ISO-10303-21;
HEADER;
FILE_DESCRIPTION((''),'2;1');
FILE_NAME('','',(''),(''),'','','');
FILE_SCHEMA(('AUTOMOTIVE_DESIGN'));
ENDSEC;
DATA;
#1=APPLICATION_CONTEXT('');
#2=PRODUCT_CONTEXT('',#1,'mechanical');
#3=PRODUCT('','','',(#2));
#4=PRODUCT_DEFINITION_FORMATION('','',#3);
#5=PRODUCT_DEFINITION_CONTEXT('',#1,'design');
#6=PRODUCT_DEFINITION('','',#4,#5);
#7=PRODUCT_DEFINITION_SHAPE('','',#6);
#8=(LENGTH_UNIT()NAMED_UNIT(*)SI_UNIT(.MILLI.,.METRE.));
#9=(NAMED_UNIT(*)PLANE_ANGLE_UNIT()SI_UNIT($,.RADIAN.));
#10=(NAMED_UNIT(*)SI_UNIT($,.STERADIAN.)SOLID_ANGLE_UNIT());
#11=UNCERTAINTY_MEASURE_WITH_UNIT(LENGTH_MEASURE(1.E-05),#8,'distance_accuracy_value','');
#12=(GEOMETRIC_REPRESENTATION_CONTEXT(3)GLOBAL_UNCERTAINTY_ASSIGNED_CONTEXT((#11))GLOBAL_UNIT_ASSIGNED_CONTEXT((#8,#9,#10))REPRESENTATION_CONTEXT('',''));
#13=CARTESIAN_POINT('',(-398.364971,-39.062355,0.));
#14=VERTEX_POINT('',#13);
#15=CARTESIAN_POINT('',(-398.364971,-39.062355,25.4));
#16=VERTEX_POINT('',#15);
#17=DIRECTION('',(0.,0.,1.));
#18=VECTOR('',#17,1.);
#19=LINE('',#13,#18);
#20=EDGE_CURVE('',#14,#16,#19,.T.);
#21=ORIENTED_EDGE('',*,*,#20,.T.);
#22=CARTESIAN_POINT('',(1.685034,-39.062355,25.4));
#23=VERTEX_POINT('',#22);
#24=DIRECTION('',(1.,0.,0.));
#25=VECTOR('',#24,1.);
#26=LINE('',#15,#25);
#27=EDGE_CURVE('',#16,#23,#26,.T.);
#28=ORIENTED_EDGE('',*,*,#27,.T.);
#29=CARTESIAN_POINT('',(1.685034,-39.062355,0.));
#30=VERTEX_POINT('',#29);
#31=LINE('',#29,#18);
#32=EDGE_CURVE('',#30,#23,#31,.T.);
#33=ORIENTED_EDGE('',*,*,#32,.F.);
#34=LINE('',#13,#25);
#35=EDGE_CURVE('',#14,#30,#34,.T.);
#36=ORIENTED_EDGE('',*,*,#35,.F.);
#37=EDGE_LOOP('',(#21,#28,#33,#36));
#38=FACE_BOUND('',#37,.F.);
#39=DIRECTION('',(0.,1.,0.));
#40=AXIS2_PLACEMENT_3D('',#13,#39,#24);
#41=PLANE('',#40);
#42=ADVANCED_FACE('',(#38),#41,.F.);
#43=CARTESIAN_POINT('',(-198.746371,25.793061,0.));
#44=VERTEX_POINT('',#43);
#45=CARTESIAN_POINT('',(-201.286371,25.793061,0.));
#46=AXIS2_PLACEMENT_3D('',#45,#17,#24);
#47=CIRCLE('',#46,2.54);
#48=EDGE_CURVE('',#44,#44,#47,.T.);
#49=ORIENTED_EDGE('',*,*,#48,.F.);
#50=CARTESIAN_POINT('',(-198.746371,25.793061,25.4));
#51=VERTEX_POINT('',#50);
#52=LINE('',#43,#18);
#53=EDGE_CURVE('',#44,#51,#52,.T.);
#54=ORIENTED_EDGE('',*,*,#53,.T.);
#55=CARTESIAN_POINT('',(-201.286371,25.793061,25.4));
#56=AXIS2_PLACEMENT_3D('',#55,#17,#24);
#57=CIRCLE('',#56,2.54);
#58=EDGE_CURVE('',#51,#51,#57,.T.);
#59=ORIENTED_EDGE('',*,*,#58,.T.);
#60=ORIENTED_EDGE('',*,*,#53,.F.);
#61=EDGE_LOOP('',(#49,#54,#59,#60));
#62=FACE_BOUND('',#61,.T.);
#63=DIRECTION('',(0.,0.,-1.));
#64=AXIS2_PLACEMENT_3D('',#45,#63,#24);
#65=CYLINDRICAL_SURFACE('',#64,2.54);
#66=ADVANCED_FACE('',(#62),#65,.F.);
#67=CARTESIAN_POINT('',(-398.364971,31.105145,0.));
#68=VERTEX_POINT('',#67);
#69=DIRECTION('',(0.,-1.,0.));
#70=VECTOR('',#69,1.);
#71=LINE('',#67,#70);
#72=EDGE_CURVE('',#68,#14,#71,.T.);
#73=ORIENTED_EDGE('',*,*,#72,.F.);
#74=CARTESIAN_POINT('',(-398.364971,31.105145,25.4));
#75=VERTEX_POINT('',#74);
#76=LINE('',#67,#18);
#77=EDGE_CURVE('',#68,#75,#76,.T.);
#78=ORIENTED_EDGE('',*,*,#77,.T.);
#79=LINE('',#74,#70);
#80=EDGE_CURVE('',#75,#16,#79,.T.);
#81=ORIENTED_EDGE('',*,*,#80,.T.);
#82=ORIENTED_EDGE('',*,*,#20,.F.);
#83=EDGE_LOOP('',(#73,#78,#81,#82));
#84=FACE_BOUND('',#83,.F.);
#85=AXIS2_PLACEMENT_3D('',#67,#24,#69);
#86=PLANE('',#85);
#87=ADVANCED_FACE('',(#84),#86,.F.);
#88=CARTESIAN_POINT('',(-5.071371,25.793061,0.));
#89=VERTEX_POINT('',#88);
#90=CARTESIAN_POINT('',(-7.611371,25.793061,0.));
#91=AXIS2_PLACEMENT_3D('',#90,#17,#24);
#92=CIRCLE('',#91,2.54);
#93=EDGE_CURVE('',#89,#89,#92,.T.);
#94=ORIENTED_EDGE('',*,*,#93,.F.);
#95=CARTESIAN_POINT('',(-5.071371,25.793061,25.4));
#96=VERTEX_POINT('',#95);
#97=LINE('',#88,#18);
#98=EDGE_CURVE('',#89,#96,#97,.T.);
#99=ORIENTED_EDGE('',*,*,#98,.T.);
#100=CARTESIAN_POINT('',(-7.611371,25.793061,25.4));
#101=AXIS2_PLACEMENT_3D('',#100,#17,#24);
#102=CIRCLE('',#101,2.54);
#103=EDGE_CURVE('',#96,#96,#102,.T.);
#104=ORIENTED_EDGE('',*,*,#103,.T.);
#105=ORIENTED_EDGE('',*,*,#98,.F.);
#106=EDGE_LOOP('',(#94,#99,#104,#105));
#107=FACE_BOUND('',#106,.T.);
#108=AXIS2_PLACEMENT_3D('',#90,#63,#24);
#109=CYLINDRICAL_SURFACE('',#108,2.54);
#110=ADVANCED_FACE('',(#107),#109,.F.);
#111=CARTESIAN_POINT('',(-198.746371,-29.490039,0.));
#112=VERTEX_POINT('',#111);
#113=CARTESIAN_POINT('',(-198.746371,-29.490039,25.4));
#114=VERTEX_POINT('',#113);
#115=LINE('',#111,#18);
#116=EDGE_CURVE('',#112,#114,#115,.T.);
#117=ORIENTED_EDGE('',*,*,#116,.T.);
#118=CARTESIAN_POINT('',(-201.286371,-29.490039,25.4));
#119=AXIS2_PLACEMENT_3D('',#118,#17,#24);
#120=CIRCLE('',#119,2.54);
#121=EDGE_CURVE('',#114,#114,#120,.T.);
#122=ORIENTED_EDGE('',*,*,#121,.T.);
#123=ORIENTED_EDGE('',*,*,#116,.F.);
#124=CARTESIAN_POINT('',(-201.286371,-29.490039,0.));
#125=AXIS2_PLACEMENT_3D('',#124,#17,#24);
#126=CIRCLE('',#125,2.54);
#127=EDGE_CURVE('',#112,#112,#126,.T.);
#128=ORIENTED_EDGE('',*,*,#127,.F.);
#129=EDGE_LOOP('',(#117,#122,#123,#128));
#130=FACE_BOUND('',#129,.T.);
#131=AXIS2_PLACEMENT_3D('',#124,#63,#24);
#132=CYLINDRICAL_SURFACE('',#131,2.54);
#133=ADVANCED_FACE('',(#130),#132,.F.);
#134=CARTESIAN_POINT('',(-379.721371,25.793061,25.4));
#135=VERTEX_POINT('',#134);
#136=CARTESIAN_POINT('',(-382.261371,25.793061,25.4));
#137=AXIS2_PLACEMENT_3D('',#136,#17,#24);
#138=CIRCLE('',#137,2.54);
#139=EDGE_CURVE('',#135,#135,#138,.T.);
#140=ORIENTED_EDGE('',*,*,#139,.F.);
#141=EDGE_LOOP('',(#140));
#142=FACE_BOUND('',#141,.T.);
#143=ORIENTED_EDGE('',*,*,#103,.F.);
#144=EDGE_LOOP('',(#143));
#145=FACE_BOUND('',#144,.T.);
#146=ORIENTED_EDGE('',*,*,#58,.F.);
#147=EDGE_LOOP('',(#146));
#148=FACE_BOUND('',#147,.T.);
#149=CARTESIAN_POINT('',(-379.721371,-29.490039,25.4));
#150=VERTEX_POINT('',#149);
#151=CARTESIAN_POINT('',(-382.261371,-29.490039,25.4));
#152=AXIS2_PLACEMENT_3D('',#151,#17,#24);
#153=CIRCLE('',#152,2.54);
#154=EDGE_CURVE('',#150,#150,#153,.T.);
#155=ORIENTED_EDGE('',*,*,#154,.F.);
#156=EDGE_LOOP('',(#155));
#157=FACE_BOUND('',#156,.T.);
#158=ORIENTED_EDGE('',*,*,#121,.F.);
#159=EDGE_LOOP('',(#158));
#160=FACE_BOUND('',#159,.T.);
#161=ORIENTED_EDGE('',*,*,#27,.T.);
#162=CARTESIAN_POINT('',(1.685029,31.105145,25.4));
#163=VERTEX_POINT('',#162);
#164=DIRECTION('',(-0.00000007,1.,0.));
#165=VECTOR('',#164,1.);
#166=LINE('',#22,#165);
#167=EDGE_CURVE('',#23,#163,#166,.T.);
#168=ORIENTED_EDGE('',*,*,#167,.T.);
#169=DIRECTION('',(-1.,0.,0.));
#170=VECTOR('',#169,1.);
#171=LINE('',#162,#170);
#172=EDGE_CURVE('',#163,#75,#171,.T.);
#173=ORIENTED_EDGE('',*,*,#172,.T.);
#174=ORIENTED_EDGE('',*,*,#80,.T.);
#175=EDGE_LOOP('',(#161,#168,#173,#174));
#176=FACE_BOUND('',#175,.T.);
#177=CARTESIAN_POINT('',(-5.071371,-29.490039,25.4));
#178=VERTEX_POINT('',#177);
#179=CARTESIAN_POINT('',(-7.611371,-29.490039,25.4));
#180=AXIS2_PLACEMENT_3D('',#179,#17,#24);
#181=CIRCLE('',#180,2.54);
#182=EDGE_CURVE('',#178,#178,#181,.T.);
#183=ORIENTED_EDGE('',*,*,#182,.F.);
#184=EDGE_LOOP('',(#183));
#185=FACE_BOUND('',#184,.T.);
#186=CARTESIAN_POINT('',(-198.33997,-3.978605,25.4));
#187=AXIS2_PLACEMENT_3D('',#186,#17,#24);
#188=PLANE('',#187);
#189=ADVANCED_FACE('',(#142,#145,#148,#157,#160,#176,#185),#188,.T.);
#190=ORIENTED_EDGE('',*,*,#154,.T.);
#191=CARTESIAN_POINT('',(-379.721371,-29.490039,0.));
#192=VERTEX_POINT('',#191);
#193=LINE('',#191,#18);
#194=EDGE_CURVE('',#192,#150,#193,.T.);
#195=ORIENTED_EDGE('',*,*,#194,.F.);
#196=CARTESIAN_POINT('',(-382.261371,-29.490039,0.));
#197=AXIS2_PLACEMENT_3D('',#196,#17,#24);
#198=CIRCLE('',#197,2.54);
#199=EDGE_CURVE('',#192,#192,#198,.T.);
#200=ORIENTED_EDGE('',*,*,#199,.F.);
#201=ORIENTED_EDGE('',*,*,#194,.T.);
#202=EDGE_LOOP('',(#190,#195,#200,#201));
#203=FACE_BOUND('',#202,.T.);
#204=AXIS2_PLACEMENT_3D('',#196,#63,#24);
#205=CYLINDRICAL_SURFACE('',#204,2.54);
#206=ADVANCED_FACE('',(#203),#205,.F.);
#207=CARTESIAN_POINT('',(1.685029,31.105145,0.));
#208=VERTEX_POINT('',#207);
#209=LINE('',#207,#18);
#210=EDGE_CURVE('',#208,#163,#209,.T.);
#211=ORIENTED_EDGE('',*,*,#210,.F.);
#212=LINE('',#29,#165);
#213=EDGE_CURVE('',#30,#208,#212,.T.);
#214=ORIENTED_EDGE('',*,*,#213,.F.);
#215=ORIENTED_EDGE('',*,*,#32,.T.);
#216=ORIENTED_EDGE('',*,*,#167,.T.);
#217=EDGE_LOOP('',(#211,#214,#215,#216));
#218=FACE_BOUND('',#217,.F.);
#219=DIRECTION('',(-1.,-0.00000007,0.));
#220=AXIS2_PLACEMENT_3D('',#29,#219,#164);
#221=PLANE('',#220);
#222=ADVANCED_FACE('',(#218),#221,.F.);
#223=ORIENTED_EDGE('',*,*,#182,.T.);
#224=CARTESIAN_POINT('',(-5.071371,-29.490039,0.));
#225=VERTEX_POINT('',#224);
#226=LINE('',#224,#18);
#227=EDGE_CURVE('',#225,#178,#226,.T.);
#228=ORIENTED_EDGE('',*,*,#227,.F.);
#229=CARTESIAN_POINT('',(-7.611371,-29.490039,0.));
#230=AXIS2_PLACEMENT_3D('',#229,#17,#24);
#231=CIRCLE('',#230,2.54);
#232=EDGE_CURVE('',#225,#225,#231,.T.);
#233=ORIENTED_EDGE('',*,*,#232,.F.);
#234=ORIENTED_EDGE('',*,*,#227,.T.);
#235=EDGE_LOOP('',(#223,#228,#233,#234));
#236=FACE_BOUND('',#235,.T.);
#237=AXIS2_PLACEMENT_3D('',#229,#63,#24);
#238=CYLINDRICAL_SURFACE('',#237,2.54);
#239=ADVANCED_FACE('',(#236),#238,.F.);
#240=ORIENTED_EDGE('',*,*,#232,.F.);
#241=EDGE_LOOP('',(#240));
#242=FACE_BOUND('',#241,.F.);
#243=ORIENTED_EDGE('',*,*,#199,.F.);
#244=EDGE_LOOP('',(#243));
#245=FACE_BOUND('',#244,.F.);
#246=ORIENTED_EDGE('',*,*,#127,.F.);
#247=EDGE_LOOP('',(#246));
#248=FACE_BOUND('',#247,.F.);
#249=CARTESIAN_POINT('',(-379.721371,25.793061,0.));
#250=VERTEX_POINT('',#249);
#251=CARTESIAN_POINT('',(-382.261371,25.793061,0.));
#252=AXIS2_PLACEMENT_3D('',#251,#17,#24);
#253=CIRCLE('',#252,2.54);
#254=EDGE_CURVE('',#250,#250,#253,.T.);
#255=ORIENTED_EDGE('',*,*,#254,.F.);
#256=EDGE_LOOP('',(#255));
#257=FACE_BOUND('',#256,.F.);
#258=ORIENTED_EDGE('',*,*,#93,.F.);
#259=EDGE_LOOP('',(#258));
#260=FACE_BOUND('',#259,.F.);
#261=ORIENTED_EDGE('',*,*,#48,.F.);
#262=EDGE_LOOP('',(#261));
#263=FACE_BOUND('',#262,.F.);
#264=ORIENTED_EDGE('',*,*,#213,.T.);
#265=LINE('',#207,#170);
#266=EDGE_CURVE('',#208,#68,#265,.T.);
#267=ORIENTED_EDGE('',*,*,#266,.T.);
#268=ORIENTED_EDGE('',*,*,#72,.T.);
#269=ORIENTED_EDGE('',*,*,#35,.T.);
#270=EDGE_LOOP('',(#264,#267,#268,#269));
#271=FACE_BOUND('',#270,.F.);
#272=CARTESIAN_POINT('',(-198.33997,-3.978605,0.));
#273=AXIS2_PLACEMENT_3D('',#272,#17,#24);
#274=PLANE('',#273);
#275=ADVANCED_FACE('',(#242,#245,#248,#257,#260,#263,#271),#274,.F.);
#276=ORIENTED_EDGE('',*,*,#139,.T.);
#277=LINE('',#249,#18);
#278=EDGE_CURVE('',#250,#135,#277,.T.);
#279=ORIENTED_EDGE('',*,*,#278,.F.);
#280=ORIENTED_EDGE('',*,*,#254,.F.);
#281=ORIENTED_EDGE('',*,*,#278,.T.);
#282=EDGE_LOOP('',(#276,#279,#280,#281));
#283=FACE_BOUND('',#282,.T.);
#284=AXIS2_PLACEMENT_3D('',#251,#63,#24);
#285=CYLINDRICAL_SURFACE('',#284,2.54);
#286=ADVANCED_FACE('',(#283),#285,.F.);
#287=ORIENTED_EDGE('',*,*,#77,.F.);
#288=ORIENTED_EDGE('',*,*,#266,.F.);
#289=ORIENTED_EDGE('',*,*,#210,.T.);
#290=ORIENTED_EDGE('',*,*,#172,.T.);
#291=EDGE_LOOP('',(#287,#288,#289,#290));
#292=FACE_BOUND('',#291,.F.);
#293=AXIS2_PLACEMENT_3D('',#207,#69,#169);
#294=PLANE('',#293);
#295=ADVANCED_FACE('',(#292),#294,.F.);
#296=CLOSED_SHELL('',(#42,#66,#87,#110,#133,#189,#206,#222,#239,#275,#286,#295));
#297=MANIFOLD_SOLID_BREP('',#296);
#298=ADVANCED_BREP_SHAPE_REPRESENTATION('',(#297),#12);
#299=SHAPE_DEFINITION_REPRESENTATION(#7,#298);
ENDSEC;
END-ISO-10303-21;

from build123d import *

# Parameters (mm, degrees)
F0_R     = 2.54
F1_DEPTH = 25.4


# Not quite as in the source:
# - ends of sketch curves that miss each other by under 0.0002 mm in the source are joined


with BuildPart() as f1:
    # F0 (on Top) → F1 (new body)
    with BuildSketch(Plane.XY):
        Polygon((1.6850286694, 31.1051446888), (-398.3649713306, 31.1051446888), (-398.3649713306, -39.0623553112), (1.6850335819, -39.0623553112), align=None)
        with Locations((-382.2613713306, -29.4900387525)):
            Circle(F0_R, mode=Mode.SUBTRACT)
        with Locations((-201.2863713306, -29.4900387525)):
            Circle(F0_R, mode=Mode.SUBTRACT)
        with Locations((-7.6113713306, -29.4900387525)):
            Circle(F0_R, mode=Mode.SUBTRACT)
        with Locations((-382.2613713306, 25.7930612475)):
            Circle(F0_R, mode=Mode.SUBTRACT)
        with Locations((-201.2863713306, 25.7930612475)):
            Circle(F0_R, mode=Mode.SUBTRACT)
        with Locations((-7.6113713306, 25.7930612475)):
            Circle(F0_R, mode=Mode.SUBTRACT)
    extrude(amount=F1_DEPTH)


solid = f1.part
